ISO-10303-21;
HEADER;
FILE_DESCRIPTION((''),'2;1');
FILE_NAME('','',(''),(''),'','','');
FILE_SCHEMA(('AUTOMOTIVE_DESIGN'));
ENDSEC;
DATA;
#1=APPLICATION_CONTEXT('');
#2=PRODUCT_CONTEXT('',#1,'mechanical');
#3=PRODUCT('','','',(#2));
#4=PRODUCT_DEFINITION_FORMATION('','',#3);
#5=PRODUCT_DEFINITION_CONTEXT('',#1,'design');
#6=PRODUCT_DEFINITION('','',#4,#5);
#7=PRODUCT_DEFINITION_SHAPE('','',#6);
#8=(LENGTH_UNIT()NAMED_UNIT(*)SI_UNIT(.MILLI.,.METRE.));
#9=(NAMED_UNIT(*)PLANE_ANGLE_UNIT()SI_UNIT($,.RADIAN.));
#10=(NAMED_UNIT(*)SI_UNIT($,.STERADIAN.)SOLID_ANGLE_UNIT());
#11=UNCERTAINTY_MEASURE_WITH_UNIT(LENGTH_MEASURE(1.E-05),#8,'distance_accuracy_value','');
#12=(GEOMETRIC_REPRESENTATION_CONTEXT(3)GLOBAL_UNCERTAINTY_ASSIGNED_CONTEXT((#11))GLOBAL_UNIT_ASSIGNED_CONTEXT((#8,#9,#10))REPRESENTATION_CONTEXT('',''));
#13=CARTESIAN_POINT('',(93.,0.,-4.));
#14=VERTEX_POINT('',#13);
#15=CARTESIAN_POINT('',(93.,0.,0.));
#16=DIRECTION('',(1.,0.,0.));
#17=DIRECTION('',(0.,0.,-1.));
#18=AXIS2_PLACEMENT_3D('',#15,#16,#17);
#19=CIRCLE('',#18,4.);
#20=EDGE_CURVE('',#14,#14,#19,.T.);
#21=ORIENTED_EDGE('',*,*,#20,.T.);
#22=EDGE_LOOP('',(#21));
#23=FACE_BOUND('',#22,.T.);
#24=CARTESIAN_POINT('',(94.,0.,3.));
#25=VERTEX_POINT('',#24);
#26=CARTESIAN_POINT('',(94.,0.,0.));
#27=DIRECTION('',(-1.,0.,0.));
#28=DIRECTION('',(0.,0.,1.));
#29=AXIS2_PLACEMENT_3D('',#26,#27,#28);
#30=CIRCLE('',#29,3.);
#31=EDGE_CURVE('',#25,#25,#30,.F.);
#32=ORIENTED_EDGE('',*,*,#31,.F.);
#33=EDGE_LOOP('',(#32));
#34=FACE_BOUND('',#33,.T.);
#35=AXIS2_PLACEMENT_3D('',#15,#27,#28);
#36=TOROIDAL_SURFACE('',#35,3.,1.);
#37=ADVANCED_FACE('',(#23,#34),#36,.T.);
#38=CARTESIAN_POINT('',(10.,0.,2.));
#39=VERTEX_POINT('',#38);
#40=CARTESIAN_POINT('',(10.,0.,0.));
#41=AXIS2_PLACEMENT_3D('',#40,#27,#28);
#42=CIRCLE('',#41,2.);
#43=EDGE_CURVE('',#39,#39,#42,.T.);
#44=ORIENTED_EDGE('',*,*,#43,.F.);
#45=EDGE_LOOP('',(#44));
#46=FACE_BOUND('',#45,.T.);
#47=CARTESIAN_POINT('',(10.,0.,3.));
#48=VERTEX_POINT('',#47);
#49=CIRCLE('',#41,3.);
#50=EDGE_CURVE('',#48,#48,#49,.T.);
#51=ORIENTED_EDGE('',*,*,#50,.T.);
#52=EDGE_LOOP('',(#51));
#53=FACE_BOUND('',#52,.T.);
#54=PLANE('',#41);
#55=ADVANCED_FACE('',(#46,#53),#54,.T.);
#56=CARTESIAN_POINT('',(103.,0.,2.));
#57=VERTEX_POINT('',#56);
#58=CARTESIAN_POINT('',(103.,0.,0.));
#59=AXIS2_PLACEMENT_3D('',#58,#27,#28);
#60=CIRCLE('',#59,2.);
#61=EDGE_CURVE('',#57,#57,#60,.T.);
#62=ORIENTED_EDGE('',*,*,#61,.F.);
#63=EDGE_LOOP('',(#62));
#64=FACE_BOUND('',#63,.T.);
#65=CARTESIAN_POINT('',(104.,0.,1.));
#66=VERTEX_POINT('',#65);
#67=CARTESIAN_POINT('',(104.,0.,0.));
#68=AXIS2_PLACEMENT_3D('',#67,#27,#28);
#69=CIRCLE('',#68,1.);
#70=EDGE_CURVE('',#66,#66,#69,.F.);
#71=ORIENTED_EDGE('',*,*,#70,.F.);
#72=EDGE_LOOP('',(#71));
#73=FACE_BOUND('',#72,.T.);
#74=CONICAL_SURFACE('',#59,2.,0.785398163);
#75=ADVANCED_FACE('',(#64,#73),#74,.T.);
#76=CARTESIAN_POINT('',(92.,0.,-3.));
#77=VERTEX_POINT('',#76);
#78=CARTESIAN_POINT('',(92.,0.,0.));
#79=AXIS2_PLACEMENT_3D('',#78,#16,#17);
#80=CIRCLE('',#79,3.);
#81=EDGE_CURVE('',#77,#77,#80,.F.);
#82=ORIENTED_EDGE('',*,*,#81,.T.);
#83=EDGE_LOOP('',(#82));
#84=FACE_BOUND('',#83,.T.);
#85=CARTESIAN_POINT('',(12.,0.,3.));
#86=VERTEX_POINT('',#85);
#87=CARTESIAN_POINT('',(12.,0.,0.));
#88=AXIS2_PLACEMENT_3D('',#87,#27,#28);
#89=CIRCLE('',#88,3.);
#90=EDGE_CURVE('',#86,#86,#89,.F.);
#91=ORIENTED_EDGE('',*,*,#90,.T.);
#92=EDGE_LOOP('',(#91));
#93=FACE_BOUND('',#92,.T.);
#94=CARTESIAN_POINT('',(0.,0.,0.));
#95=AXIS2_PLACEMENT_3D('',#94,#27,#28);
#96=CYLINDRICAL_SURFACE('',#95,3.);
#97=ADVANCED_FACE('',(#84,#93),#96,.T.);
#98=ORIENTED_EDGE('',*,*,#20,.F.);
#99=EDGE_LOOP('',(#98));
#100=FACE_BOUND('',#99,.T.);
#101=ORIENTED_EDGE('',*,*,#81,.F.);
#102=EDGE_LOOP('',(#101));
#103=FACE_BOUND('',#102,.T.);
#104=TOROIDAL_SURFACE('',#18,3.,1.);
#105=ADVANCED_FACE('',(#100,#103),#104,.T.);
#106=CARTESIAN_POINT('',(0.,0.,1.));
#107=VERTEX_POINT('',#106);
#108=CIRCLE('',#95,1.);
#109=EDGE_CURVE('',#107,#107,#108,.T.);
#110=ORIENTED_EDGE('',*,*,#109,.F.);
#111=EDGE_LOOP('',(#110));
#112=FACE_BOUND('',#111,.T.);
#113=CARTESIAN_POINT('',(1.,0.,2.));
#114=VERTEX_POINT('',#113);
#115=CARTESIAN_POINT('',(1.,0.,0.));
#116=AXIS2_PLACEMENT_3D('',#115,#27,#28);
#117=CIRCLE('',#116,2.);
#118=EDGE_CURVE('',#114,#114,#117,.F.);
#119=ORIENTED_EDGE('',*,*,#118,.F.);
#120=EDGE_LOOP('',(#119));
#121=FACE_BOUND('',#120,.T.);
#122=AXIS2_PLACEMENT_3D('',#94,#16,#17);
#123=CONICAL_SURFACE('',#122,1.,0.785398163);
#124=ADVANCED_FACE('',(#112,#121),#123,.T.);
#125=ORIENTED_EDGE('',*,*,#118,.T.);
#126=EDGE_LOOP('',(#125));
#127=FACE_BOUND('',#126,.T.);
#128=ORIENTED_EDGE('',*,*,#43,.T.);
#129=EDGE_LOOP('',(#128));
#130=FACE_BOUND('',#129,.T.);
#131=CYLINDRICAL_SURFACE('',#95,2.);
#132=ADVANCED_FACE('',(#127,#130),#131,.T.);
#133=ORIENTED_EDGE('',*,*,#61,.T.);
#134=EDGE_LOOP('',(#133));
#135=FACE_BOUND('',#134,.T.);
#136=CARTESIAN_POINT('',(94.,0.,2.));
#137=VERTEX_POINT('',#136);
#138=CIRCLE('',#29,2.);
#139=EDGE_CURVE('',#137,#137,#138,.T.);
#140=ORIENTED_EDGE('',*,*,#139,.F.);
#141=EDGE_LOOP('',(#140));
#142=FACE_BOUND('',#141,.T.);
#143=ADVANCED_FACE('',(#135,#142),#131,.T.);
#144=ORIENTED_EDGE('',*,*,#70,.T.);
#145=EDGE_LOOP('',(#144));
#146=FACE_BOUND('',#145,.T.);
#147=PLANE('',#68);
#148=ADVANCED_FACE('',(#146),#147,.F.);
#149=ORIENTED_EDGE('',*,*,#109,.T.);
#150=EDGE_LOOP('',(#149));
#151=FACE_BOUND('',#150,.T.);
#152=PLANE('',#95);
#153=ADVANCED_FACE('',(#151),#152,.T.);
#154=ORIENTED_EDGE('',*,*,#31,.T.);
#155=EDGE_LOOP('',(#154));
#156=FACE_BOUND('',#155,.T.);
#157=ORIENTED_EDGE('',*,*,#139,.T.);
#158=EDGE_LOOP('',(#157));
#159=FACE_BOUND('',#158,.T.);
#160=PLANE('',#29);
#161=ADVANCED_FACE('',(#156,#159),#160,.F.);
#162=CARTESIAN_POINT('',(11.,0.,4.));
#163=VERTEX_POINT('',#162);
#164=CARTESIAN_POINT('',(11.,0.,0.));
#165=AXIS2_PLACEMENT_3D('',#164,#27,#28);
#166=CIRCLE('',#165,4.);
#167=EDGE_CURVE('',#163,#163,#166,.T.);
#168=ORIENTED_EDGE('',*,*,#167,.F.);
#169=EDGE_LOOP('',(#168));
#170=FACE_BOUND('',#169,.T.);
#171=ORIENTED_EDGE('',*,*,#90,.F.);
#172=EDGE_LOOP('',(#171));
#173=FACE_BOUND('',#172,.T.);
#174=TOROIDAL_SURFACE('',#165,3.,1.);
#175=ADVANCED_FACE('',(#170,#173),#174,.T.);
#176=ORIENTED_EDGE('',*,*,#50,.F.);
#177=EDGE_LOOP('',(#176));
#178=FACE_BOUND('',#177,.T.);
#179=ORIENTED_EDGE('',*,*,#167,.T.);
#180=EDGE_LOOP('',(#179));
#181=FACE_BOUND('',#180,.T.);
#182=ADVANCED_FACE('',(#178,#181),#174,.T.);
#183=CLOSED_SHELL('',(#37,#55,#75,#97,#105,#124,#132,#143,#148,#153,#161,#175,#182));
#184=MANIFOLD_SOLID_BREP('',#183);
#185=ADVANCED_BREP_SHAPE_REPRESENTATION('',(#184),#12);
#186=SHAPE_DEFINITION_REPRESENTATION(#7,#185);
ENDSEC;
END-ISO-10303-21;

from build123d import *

# Parameters (mm, degrees)
SKETCH2_W           = 10
SKETCH2_H           = 2
SKETCH3_R           = 4
BOSS_EXTRUDE1_DEPTH = 2
FILLET1_R           = 1
CHAMFER1_SIZE       = 1
CHAMFER2_SIZE       = 1
BOSS_EXTRUDE2_START = -2
SKETCH4_R           = 4
BOSS_EXTRUDE2_DEPTH = 2
FILLET2_R           = 1


with BuildPart() as part:
    # Sketch2 → Revolve2 (revolve)
    with BuildSketch(Plane.XY, mode=Mode.PRIVATE) as revolve2_sk:
        with Locations((99, 1)):
            Rectangle(SKETCH2_W, SKETCH2_H)
        Polygon((10, 2), (10, 0), (94, 0), (94, 2), (94, 3), (10, 3), align=None)
        with Locations((5, 1)):
            Rectangle(SKETCH2_W, SKETCH2_H)
    revolve(revolve2_sk.sketch.rotate(Axis((0, 0, 0), (1, 0, 0)), 90), axis=Axis((0, 0, 0), (1, 0, 0)))

    # Sketch3 → Boss-Extrude1 (add)
    with BuildSketch(Plane(origin=(94, 0, 0), x_dir=(0, 0, -1), z_dir=(1, 0, 0))):
        Circle(SKETCH3_R)
    extrude(amount=-BOSS_EXTRUDE1_DEPTH)

    # Fillet1
    fillet1_edges = [part.edges().sort_by_distance(p)[0] for p in [
        (92, 0, 4),
        (94, 0, 4),
    ]]
    fillet(fillet1_edges, radius=FILLET1_R - 0.0001)  # a hair under: the kernel refuses the full size

    # Chamfer1
    chamfer1_edges = [part.edges().sort_by_distance(p)[0] for p in [
        (104, 0, -2),
    ]]
    chamfer(chamfer1_edges, length=CHAMFER1_SIZE)

    # Chamfer2
    chamfer2_edges = [part.edges().sort_by_distance(p)[0] for p in [
        (0, 0, -2),
    ]]
    chamfer(chamfer2_edges, length=CHAMFER2_SIZE)

    # Sketch4 → Boss-Extrude2 (add)
    with BuildSketch(Plane.ZY.offset(-10).offset(BOSS_EXTRUDE2_START)):
        Circle(SKETCH4_R)
    extrude(amount=BOSS_EXTRUDE2_DEPTH)

    # Fillet2
    fillet2_edges = [part.edges().sort_by_distance(p)[0] for p in [
        (12, 0, -4),
        (10, 0, -4),
    ]]
    fillet(fillet2_edges, radius=FILLET2_R - 0.0001)  # a hair under: the kernel refuses the full size


solid = part.part
